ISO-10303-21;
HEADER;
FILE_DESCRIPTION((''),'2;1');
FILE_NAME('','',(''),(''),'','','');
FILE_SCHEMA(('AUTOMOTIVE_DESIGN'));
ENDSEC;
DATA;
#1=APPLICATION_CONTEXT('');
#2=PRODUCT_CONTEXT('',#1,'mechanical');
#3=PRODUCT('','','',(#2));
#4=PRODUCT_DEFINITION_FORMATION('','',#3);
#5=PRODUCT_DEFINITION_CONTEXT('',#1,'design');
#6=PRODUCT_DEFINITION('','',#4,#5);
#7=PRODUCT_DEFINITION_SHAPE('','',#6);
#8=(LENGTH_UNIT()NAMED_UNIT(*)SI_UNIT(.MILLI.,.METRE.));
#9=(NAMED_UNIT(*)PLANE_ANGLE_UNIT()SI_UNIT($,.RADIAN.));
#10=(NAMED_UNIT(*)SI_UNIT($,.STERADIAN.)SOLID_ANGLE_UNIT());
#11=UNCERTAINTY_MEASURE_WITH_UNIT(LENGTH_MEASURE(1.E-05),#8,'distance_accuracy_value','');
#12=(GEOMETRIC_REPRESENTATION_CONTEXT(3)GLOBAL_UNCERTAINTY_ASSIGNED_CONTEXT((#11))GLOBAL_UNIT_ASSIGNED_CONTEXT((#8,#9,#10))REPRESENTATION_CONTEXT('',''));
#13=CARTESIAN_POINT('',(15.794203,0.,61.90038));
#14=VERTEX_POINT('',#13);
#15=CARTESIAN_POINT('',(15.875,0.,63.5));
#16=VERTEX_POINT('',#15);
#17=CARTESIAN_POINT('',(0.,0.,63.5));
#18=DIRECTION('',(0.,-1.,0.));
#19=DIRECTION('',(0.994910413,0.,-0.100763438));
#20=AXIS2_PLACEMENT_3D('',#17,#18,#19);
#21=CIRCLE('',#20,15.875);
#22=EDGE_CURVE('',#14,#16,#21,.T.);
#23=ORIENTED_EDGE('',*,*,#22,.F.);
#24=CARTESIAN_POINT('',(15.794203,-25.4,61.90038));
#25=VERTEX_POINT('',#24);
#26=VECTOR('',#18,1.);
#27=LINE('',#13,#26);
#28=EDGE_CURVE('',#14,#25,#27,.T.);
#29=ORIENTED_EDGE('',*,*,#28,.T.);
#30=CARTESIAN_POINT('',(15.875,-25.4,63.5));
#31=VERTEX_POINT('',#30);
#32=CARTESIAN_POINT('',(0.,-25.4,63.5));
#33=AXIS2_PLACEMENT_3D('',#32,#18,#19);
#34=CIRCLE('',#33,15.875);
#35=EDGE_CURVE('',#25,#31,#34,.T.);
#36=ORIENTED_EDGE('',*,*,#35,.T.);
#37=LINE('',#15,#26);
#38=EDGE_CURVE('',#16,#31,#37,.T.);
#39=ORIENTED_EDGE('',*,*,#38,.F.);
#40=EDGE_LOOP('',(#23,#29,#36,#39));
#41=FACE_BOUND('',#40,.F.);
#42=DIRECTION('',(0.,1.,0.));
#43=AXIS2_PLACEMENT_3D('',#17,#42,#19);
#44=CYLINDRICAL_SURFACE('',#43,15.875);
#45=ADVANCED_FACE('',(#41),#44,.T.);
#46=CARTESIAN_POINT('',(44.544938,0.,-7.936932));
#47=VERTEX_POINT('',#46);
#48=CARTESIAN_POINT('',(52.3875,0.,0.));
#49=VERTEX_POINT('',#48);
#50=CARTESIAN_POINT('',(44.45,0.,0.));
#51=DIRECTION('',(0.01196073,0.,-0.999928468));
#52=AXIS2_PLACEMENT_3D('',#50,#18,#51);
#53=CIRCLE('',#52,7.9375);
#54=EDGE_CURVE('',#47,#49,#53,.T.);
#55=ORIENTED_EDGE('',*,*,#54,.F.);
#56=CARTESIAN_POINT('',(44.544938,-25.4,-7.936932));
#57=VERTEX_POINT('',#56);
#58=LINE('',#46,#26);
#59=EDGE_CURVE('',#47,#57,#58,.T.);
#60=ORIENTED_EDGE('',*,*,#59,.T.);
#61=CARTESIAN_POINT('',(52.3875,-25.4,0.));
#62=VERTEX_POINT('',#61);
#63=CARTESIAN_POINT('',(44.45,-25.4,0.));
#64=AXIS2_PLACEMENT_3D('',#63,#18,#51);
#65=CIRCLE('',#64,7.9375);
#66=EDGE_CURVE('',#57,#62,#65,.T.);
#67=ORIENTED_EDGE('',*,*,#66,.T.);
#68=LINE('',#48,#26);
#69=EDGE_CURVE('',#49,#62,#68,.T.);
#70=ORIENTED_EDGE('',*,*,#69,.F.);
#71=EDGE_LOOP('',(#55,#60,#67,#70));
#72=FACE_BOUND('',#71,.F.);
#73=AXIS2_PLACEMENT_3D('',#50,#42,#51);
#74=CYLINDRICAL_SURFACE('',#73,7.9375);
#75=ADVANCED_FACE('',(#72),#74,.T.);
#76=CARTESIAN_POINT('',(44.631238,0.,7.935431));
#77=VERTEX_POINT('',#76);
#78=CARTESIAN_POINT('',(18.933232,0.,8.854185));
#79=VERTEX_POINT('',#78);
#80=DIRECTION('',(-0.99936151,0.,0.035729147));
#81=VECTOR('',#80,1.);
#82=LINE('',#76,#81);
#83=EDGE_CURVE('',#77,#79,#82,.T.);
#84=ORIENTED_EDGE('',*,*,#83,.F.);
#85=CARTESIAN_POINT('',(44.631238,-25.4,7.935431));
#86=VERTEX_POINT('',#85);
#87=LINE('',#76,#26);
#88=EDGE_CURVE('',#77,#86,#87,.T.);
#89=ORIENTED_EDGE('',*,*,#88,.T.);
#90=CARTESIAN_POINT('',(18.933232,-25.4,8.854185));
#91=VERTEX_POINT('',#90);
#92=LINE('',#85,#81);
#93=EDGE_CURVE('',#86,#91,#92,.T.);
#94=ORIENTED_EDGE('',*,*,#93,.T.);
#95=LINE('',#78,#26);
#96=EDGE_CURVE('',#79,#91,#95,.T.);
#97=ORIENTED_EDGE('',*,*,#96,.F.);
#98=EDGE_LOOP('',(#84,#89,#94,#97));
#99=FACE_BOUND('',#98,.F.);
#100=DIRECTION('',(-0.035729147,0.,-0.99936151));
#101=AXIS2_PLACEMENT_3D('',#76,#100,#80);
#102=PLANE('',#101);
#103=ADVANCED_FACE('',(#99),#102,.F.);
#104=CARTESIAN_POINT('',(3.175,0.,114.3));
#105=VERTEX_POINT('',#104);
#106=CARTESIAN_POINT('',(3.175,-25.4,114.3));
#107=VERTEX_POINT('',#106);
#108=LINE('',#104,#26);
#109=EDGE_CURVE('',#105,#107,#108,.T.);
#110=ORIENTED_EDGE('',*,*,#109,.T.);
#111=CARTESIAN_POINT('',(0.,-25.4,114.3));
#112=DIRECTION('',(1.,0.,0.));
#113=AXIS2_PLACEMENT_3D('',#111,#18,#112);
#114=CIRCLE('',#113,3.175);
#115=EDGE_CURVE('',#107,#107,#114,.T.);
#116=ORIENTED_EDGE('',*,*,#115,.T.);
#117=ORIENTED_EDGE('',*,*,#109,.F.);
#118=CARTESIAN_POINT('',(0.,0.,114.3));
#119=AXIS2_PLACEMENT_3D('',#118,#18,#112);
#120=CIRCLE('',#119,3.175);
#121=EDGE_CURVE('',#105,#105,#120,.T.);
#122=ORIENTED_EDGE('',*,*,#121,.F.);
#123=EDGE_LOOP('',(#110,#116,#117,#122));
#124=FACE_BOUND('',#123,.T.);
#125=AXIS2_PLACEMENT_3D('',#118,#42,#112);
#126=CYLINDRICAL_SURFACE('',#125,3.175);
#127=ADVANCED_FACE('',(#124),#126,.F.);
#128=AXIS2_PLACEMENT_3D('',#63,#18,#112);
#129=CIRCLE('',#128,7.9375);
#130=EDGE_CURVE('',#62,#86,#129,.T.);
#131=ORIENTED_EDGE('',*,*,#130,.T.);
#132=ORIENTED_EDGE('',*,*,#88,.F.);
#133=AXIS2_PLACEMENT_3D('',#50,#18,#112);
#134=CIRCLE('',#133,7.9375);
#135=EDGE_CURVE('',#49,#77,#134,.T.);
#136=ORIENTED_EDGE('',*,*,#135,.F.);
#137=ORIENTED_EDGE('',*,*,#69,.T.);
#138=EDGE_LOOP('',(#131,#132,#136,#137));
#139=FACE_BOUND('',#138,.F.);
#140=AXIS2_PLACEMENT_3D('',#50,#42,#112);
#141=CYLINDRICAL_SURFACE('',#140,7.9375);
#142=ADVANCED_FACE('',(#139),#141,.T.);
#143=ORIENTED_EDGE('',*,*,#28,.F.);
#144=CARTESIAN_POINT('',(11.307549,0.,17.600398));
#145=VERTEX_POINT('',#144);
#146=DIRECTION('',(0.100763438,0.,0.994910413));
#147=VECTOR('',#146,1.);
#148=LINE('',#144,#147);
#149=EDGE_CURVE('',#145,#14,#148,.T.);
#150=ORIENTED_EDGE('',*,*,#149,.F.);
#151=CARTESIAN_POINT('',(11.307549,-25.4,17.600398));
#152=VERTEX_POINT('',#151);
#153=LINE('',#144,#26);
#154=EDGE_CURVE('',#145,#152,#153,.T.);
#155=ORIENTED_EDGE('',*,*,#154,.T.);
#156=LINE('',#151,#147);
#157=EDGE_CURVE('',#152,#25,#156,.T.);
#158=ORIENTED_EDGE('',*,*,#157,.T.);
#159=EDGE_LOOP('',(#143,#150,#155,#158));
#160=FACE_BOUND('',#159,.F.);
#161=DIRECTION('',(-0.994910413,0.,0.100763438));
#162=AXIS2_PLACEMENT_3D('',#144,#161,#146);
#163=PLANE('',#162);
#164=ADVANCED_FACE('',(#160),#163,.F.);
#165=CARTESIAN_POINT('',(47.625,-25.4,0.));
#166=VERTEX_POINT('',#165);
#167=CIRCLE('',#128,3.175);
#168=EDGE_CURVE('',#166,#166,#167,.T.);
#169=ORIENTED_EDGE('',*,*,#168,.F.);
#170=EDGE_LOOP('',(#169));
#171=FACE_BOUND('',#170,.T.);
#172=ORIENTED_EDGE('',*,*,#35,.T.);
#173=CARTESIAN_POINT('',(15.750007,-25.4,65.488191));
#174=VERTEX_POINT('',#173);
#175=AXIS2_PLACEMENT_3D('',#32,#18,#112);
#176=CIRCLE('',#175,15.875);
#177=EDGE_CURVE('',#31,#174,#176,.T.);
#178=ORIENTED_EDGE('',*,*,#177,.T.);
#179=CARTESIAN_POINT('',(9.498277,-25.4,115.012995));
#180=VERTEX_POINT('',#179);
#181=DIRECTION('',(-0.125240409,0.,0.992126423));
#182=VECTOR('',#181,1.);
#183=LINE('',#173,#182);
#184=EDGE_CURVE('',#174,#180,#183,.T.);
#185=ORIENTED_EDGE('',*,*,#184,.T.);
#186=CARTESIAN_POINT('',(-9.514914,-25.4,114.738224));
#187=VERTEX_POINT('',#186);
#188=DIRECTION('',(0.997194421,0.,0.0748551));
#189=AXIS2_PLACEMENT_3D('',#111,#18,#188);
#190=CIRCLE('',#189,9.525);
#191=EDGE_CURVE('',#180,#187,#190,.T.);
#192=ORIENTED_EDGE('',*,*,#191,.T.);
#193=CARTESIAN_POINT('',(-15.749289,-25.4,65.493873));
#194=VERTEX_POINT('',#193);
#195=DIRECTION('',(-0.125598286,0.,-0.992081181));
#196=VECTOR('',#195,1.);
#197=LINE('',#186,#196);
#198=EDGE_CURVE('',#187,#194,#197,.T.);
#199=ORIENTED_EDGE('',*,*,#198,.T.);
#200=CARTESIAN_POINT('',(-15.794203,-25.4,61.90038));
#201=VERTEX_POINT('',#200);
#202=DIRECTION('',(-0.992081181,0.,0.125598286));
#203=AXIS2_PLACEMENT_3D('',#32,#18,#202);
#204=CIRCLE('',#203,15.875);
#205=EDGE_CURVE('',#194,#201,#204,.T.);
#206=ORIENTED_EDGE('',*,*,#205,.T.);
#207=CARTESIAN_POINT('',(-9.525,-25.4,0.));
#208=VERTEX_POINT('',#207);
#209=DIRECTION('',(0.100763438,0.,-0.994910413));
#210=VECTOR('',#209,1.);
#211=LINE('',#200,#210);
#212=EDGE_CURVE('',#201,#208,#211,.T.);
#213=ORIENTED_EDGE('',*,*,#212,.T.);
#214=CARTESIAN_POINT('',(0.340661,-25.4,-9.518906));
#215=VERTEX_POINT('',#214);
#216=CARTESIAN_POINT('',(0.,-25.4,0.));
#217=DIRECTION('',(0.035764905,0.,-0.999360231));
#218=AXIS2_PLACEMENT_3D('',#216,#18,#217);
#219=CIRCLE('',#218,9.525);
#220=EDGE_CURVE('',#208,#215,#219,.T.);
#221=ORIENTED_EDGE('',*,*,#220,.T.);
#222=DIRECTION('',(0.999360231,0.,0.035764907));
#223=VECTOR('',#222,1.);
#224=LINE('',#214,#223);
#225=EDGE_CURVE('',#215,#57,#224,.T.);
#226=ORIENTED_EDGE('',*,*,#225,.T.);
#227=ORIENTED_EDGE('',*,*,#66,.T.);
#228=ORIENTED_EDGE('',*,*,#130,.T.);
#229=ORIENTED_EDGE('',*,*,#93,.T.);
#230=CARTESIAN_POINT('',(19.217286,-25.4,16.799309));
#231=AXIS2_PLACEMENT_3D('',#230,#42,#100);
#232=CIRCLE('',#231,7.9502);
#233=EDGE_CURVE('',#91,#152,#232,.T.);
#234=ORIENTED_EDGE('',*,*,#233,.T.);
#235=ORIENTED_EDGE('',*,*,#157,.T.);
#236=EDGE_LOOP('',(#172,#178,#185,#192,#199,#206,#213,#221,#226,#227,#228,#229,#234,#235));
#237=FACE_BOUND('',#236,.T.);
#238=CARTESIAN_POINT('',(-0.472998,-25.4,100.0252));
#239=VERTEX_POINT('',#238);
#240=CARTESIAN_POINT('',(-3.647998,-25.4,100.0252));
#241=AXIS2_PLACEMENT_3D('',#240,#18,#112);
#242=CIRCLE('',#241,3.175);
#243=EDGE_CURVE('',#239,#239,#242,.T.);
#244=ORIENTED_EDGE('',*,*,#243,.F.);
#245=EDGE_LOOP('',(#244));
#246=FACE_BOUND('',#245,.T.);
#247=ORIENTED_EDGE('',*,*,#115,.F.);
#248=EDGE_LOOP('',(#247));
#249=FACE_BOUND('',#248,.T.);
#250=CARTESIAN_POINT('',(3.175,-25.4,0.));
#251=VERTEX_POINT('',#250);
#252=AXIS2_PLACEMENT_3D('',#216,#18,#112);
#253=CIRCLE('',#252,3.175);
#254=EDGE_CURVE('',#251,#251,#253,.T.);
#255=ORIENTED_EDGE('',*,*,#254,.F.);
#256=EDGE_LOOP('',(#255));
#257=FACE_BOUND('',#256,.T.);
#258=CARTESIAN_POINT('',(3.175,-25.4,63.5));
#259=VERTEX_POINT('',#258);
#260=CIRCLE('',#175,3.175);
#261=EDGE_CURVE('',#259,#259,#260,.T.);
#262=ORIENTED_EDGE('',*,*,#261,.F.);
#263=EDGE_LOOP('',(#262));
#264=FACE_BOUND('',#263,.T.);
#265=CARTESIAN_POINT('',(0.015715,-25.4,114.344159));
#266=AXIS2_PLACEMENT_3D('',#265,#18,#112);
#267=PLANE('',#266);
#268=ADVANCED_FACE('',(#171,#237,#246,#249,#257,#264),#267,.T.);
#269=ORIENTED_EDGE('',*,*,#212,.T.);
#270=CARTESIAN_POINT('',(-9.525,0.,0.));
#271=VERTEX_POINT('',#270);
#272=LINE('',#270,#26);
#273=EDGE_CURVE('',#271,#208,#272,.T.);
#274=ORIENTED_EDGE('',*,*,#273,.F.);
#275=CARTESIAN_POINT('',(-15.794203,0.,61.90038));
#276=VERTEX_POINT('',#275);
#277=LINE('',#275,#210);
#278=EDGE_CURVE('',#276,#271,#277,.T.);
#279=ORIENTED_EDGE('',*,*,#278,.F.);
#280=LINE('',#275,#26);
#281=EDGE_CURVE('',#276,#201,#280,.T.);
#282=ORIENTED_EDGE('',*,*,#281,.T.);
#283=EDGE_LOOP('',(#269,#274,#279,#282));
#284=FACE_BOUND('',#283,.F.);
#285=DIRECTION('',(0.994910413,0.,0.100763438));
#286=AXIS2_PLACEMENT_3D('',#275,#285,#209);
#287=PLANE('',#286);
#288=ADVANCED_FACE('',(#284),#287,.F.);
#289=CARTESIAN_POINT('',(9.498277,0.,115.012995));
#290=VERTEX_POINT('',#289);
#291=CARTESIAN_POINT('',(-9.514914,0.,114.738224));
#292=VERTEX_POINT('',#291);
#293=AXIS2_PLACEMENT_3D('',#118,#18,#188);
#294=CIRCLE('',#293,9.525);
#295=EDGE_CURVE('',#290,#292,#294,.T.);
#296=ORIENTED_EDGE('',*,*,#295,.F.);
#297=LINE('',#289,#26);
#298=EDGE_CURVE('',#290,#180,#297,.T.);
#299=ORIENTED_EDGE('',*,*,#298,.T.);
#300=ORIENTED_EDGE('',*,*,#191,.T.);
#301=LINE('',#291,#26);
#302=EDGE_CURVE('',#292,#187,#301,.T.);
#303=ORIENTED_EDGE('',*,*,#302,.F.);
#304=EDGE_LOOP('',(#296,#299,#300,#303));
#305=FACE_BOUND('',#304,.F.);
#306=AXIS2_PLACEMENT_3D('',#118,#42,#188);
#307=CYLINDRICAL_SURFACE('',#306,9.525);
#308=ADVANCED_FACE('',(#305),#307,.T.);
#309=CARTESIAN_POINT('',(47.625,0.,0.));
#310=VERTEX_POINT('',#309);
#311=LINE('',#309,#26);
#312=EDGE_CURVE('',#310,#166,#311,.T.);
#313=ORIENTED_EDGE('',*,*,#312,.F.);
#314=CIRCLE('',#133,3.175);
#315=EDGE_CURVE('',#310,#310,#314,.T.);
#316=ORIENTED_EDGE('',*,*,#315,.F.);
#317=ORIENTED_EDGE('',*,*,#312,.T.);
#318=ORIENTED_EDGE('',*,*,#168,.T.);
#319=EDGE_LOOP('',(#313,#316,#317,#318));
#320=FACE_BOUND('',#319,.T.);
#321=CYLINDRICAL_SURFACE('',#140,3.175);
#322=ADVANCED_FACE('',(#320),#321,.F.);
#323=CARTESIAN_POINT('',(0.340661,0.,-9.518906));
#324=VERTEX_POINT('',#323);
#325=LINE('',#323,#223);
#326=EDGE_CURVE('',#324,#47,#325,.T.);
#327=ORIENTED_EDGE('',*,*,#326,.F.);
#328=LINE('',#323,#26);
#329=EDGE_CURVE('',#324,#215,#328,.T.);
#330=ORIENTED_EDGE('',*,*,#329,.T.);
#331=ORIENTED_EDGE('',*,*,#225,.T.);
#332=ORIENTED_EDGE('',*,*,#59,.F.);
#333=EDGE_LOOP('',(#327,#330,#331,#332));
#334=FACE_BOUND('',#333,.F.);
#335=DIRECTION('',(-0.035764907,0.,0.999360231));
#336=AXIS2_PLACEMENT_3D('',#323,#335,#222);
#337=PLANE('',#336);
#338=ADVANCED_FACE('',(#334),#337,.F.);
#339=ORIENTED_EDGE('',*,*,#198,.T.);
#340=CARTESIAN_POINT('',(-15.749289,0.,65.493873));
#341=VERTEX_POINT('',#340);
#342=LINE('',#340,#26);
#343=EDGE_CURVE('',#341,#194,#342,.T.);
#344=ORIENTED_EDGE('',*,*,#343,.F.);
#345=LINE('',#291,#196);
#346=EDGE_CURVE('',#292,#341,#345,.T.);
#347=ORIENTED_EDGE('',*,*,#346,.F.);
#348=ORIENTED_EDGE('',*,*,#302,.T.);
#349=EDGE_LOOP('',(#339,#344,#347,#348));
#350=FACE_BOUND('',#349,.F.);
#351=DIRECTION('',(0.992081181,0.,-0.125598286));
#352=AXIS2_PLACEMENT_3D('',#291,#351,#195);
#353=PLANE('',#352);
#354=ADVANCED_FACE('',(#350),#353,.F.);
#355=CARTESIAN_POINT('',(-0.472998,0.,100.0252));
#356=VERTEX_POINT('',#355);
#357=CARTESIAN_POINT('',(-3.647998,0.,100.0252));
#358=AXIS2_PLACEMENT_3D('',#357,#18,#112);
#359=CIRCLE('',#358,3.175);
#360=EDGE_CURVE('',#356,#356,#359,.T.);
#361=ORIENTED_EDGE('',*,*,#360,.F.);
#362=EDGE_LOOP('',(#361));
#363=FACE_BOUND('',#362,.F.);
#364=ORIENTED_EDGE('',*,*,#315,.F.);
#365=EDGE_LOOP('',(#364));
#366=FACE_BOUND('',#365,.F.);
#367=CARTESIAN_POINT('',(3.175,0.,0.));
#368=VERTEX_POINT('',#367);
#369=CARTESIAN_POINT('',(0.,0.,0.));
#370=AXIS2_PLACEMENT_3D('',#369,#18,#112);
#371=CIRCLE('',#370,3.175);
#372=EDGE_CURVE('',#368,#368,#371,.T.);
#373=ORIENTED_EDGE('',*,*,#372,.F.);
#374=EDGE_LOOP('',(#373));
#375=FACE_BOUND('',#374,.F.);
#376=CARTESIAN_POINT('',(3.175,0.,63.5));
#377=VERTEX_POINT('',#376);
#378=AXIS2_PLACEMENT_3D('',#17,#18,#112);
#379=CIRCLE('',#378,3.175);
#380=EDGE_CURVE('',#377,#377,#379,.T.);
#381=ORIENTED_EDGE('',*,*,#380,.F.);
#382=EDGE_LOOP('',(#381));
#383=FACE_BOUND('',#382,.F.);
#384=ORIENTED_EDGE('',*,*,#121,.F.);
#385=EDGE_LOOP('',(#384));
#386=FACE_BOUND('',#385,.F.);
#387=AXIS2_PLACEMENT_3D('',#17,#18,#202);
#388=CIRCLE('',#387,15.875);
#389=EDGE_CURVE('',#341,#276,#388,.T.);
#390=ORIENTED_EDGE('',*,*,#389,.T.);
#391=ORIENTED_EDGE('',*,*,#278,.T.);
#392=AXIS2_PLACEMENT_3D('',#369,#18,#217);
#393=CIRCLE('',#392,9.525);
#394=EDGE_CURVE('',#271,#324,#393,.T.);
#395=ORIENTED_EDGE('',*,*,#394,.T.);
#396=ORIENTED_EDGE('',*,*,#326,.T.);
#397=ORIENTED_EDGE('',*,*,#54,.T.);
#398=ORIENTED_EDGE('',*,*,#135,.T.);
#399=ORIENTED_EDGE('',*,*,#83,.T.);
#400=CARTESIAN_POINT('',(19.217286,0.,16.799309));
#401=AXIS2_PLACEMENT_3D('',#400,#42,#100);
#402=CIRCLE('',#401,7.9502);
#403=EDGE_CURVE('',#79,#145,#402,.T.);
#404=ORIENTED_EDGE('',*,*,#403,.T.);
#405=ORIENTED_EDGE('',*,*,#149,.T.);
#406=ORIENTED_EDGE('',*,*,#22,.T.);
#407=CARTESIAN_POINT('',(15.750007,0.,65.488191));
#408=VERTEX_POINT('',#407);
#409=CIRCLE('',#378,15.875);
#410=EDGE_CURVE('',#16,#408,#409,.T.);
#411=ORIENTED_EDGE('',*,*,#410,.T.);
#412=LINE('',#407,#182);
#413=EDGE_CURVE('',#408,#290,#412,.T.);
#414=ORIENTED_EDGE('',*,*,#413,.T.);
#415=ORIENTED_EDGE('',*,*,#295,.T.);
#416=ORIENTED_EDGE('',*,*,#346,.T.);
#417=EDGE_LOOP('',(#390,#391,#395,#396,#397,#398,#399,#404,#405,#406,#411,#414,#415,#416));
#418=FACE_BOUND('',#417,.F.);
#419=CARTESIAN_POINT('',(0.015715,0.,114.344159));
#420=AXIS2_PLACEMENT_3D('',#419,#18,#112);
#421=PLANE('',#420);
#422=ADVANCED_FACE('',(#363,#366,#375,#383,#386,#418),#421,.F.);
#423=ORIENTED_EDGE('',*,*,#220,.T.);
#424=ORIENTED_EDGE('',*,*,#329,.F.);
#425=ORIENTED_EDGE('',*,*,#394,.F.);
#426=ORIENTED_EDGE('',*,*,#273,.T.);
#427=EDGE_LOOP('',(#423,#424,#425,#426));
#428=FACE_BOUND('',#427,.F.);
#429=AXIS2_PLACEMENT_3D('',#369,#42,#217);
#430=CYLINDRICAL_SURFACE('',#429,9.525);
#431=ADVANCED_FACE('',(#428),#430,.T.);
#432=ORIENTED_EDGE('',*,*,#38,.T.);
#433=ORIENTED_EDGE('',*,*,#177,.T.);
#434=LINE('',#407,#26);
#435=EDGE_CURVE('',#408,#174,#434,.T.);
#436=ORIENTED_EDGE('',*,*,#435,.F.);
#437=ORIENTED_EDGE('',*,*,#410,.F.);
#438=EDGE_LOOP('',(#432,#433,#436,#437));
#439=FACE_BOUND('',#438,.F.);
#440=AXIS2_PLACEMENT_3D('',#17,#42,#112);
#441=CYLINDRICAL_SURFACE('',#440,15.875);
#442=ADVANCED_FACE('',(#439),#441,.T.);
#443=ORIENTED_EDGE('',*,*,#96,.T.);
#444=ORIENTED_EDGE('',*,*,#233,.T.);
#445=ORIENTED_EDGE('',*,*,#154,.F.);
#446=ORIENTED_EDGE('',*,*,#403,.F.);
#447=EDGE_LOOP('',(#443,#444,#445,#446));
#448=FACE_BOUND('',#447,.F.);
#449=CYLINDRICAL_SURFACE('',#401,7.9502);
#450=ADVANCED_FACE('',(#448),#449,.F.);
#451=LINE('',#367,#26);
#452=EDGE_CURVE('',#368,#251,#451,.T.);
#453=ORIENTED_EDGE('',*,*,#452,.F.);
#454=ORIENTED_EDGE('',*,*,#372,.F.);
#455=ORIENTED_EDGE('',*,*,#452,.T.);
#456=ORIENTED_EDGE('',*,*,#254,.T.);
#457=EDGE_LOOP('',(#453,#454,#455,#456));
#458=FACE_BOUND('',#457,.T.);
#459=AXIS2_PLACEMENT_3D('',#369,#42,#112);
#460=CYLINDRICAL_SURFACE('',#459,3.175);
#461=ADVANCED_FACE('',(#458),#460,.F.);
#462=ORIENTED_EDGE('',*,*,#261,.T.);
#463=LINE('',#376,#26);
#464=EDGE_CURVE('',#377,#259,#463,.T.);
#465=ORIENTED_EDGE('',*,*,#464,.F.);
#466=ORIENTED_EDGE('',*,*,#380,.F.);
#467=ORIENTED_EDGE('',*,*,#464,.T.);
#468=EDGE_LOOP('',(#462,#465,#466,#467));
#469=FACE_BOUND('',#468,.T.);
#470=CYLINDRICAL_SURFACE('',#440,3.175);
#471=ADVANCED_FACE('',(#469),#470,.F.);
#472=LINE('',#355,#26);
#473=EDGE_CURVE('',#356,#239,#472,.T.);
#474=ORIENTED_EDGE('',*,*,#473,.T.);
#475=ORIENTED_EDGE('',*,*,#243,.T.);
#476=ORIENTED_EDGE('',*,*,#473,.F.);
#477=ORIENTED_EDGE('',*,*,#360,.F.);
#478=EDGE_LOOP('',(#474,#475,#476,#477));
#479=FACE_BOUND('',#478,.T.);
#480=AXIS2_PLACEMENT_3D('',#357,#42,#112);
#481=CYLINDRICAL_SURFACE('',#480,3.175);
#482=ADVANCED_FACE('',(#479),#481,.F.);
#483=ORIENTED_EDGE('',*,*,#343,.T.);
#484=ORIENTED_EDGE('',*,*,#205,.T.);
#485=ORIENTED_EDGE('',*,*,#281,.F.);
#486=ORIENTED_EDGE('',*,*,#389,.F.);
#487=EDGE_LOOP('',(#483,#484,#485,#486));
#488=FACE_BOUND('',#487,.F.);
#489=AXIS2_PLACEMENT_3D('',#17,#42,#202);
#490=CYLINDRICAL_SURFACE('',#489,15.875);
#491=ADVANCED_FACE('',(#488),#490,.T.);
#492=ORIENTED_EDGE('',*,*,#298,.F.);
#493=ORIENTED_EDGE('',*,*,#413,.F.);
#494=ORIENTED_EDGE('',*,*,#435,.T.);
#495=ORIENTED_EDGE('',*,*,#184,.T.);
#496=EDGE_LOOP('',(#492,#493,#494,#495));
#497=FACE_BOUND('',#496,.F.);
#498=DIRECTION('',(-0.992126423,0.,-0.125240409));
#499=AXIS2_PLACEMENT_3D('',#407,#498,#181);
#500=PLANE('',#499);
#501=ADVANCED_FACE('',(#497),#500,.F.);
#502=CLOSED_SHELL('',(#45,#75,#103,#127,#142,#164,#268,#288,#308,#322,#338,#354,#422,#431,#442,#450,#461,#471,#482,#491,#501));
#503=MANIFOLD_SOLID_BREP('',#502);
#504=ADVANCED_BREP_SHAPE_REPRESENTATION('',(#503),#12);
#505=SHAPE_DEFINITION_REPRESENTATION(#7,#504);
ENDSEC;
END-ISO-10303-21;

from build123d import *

# Parameters (mm, degrees)
F0_R     = 3.175
F1_DEPTH = 25.4


# Not quite as in the source:
# - a feature names something its author has since deleted; it is built from what else it names


with BuildPart() as f1:
    # F0 (on Front) → F1 (new body)
    with BuildSketch(Plane.XZ):
        with BuildLine():
            ThreePointArc((-9.5149138168, 114.7382237551), (-0.2191699059, 104.7775218797), (9.525, 114.3))
            ThreePointArc((9.525, 114.3), (9.5183168712, 114.6567477241), (9.4982768633, 115.0129948306))
            ThreePointArc((9.4982768633, 115.0129948306), (-0.1376371427, 123.8240055133), (-9.5149138168, 114.7382237551))
        make_face()
        with Locations((0, 114.3)):
            Circle(F0_R, mode=Mode.SUBTRACT)
        with BuildLine():
            ThreePointArc((9.4982768633, 115.0129948306), (9.5183168712, 114.6567477241), (9.525, 114.3))
            ThreePointArc((9.525, 114.3), (-0.2191699059, 104.7775218797), (-9.5149138168, 114.7382237551))
            Line((-9.5149138168, 114.7382237551), (-15.7492887561, 65.4938727833))
            ThreePointArc((-15.7492887561, 65.4938727833), (0.002863253, 79.3749997418), (15.7500069708, 65.4881914948))
            Line((15.7500069708, 65.4881914948), (9.4982768633, 115.0129948306))
        make_face()
        with Locations((-3.6479982082, 100.0252)):
            Circle(F0_R, mode=Mode.SUBTRACT)
        with BuildLine():
            ThreePointArc((15.875, 63.5), (15.8437209276, 64.4960583162), (15.7500069708, 65.4881914948))
            ThreePointArc((15.7500069708, 65.4881914948), (0.002863253, 79.3749997418), (-15.7492887561, 65.4938727833))
            ThreePointArc((-15.7492887561, 65.4938727833), (-15.8737601653, 63.698401651), (-15.7942028036, 61.9003804205))
            ThreePointArc((-15.7942028036, 61.9003804205), (0, 47.625), (15.7942028036, 61.9003804205))
            ThreePointArc((15.7942028036, 61.9003804205), (15.8547878338, 62.6991705884), (15.875, 63.5))
        make_face()
        with Locations((0, 63.5)):
            Circle(F0_R, mode=Mode.SUBTRACT)
        with BuildLine():
            ThreePointArc((15.7942028036, 61.9003804205), (0, 47.625), (-15.7942028036, 61.9003804205))
            Line((-15.7942028036, 61.9003804205), (-9.525, 0))
            ThreePointArc((-9.525, 0), (0, 9.525), (9.525, 0))
            ThreePointArc((9.525, 0), (6.854575784, -6.6136537422), (0.3406607199, -9.5189062016))
            Line((0.3406607199, -9.5189062016), (44.5449382907, -7.9369322141))
            ThreePointArc((44.5449382907, -7.9369322141), (36.5126173213, 0.0431562547), (44.6312377373, 7.9354306205))
            Line((44.6312377373, 7.9354306205), (18.9332319933, 8.8541850706))
            ThreePointArc((18.9332319933, 8.8541850706), (13.2249062601, 11.5746494613), (11.3075490968, 17.6003984343))
            Line((11.3075490968, 17.6003984343), (15.7942028036, 61.9003804205))
        make_face()
        with BuildLine():
            ThreePointArc((9.525, 0), (0, 9.525), (-9.525, 0))
            ThreePointArc((-9.525, 0), (-6.6136537422, -6.854575784), (0.3406607199, -9.5189062016))
            ThreePointArc((0.3406607199, -9.5189062016), (6.854575784, -6.6136537422), (9.525, 0))
        make_face()
        Circle(F0_R, mode=Mode.SUBTRACT)
        with BuildLine():
            ThreePointArc((44.6312377373, 7.9354306205), (36.5126173213, 0.0431562547), (44.5449382907, -7.9369322141))
            ThreePointArc((44.5449382907, -7.9369322141), (50.0961260583, -5.5789933486), (52.3875, 0))
            ThreePointArc((52.3875, 0), (50.126375639, 5.5482128524), (44.6312377373, 7.9354306205))
        make_face()
        with Locations((44.45, 0)):
            Circle(F0_R, mode=Mode.SUBTRACT)
    extrude(amount=F1_DEPTH)


solid = f1.part
